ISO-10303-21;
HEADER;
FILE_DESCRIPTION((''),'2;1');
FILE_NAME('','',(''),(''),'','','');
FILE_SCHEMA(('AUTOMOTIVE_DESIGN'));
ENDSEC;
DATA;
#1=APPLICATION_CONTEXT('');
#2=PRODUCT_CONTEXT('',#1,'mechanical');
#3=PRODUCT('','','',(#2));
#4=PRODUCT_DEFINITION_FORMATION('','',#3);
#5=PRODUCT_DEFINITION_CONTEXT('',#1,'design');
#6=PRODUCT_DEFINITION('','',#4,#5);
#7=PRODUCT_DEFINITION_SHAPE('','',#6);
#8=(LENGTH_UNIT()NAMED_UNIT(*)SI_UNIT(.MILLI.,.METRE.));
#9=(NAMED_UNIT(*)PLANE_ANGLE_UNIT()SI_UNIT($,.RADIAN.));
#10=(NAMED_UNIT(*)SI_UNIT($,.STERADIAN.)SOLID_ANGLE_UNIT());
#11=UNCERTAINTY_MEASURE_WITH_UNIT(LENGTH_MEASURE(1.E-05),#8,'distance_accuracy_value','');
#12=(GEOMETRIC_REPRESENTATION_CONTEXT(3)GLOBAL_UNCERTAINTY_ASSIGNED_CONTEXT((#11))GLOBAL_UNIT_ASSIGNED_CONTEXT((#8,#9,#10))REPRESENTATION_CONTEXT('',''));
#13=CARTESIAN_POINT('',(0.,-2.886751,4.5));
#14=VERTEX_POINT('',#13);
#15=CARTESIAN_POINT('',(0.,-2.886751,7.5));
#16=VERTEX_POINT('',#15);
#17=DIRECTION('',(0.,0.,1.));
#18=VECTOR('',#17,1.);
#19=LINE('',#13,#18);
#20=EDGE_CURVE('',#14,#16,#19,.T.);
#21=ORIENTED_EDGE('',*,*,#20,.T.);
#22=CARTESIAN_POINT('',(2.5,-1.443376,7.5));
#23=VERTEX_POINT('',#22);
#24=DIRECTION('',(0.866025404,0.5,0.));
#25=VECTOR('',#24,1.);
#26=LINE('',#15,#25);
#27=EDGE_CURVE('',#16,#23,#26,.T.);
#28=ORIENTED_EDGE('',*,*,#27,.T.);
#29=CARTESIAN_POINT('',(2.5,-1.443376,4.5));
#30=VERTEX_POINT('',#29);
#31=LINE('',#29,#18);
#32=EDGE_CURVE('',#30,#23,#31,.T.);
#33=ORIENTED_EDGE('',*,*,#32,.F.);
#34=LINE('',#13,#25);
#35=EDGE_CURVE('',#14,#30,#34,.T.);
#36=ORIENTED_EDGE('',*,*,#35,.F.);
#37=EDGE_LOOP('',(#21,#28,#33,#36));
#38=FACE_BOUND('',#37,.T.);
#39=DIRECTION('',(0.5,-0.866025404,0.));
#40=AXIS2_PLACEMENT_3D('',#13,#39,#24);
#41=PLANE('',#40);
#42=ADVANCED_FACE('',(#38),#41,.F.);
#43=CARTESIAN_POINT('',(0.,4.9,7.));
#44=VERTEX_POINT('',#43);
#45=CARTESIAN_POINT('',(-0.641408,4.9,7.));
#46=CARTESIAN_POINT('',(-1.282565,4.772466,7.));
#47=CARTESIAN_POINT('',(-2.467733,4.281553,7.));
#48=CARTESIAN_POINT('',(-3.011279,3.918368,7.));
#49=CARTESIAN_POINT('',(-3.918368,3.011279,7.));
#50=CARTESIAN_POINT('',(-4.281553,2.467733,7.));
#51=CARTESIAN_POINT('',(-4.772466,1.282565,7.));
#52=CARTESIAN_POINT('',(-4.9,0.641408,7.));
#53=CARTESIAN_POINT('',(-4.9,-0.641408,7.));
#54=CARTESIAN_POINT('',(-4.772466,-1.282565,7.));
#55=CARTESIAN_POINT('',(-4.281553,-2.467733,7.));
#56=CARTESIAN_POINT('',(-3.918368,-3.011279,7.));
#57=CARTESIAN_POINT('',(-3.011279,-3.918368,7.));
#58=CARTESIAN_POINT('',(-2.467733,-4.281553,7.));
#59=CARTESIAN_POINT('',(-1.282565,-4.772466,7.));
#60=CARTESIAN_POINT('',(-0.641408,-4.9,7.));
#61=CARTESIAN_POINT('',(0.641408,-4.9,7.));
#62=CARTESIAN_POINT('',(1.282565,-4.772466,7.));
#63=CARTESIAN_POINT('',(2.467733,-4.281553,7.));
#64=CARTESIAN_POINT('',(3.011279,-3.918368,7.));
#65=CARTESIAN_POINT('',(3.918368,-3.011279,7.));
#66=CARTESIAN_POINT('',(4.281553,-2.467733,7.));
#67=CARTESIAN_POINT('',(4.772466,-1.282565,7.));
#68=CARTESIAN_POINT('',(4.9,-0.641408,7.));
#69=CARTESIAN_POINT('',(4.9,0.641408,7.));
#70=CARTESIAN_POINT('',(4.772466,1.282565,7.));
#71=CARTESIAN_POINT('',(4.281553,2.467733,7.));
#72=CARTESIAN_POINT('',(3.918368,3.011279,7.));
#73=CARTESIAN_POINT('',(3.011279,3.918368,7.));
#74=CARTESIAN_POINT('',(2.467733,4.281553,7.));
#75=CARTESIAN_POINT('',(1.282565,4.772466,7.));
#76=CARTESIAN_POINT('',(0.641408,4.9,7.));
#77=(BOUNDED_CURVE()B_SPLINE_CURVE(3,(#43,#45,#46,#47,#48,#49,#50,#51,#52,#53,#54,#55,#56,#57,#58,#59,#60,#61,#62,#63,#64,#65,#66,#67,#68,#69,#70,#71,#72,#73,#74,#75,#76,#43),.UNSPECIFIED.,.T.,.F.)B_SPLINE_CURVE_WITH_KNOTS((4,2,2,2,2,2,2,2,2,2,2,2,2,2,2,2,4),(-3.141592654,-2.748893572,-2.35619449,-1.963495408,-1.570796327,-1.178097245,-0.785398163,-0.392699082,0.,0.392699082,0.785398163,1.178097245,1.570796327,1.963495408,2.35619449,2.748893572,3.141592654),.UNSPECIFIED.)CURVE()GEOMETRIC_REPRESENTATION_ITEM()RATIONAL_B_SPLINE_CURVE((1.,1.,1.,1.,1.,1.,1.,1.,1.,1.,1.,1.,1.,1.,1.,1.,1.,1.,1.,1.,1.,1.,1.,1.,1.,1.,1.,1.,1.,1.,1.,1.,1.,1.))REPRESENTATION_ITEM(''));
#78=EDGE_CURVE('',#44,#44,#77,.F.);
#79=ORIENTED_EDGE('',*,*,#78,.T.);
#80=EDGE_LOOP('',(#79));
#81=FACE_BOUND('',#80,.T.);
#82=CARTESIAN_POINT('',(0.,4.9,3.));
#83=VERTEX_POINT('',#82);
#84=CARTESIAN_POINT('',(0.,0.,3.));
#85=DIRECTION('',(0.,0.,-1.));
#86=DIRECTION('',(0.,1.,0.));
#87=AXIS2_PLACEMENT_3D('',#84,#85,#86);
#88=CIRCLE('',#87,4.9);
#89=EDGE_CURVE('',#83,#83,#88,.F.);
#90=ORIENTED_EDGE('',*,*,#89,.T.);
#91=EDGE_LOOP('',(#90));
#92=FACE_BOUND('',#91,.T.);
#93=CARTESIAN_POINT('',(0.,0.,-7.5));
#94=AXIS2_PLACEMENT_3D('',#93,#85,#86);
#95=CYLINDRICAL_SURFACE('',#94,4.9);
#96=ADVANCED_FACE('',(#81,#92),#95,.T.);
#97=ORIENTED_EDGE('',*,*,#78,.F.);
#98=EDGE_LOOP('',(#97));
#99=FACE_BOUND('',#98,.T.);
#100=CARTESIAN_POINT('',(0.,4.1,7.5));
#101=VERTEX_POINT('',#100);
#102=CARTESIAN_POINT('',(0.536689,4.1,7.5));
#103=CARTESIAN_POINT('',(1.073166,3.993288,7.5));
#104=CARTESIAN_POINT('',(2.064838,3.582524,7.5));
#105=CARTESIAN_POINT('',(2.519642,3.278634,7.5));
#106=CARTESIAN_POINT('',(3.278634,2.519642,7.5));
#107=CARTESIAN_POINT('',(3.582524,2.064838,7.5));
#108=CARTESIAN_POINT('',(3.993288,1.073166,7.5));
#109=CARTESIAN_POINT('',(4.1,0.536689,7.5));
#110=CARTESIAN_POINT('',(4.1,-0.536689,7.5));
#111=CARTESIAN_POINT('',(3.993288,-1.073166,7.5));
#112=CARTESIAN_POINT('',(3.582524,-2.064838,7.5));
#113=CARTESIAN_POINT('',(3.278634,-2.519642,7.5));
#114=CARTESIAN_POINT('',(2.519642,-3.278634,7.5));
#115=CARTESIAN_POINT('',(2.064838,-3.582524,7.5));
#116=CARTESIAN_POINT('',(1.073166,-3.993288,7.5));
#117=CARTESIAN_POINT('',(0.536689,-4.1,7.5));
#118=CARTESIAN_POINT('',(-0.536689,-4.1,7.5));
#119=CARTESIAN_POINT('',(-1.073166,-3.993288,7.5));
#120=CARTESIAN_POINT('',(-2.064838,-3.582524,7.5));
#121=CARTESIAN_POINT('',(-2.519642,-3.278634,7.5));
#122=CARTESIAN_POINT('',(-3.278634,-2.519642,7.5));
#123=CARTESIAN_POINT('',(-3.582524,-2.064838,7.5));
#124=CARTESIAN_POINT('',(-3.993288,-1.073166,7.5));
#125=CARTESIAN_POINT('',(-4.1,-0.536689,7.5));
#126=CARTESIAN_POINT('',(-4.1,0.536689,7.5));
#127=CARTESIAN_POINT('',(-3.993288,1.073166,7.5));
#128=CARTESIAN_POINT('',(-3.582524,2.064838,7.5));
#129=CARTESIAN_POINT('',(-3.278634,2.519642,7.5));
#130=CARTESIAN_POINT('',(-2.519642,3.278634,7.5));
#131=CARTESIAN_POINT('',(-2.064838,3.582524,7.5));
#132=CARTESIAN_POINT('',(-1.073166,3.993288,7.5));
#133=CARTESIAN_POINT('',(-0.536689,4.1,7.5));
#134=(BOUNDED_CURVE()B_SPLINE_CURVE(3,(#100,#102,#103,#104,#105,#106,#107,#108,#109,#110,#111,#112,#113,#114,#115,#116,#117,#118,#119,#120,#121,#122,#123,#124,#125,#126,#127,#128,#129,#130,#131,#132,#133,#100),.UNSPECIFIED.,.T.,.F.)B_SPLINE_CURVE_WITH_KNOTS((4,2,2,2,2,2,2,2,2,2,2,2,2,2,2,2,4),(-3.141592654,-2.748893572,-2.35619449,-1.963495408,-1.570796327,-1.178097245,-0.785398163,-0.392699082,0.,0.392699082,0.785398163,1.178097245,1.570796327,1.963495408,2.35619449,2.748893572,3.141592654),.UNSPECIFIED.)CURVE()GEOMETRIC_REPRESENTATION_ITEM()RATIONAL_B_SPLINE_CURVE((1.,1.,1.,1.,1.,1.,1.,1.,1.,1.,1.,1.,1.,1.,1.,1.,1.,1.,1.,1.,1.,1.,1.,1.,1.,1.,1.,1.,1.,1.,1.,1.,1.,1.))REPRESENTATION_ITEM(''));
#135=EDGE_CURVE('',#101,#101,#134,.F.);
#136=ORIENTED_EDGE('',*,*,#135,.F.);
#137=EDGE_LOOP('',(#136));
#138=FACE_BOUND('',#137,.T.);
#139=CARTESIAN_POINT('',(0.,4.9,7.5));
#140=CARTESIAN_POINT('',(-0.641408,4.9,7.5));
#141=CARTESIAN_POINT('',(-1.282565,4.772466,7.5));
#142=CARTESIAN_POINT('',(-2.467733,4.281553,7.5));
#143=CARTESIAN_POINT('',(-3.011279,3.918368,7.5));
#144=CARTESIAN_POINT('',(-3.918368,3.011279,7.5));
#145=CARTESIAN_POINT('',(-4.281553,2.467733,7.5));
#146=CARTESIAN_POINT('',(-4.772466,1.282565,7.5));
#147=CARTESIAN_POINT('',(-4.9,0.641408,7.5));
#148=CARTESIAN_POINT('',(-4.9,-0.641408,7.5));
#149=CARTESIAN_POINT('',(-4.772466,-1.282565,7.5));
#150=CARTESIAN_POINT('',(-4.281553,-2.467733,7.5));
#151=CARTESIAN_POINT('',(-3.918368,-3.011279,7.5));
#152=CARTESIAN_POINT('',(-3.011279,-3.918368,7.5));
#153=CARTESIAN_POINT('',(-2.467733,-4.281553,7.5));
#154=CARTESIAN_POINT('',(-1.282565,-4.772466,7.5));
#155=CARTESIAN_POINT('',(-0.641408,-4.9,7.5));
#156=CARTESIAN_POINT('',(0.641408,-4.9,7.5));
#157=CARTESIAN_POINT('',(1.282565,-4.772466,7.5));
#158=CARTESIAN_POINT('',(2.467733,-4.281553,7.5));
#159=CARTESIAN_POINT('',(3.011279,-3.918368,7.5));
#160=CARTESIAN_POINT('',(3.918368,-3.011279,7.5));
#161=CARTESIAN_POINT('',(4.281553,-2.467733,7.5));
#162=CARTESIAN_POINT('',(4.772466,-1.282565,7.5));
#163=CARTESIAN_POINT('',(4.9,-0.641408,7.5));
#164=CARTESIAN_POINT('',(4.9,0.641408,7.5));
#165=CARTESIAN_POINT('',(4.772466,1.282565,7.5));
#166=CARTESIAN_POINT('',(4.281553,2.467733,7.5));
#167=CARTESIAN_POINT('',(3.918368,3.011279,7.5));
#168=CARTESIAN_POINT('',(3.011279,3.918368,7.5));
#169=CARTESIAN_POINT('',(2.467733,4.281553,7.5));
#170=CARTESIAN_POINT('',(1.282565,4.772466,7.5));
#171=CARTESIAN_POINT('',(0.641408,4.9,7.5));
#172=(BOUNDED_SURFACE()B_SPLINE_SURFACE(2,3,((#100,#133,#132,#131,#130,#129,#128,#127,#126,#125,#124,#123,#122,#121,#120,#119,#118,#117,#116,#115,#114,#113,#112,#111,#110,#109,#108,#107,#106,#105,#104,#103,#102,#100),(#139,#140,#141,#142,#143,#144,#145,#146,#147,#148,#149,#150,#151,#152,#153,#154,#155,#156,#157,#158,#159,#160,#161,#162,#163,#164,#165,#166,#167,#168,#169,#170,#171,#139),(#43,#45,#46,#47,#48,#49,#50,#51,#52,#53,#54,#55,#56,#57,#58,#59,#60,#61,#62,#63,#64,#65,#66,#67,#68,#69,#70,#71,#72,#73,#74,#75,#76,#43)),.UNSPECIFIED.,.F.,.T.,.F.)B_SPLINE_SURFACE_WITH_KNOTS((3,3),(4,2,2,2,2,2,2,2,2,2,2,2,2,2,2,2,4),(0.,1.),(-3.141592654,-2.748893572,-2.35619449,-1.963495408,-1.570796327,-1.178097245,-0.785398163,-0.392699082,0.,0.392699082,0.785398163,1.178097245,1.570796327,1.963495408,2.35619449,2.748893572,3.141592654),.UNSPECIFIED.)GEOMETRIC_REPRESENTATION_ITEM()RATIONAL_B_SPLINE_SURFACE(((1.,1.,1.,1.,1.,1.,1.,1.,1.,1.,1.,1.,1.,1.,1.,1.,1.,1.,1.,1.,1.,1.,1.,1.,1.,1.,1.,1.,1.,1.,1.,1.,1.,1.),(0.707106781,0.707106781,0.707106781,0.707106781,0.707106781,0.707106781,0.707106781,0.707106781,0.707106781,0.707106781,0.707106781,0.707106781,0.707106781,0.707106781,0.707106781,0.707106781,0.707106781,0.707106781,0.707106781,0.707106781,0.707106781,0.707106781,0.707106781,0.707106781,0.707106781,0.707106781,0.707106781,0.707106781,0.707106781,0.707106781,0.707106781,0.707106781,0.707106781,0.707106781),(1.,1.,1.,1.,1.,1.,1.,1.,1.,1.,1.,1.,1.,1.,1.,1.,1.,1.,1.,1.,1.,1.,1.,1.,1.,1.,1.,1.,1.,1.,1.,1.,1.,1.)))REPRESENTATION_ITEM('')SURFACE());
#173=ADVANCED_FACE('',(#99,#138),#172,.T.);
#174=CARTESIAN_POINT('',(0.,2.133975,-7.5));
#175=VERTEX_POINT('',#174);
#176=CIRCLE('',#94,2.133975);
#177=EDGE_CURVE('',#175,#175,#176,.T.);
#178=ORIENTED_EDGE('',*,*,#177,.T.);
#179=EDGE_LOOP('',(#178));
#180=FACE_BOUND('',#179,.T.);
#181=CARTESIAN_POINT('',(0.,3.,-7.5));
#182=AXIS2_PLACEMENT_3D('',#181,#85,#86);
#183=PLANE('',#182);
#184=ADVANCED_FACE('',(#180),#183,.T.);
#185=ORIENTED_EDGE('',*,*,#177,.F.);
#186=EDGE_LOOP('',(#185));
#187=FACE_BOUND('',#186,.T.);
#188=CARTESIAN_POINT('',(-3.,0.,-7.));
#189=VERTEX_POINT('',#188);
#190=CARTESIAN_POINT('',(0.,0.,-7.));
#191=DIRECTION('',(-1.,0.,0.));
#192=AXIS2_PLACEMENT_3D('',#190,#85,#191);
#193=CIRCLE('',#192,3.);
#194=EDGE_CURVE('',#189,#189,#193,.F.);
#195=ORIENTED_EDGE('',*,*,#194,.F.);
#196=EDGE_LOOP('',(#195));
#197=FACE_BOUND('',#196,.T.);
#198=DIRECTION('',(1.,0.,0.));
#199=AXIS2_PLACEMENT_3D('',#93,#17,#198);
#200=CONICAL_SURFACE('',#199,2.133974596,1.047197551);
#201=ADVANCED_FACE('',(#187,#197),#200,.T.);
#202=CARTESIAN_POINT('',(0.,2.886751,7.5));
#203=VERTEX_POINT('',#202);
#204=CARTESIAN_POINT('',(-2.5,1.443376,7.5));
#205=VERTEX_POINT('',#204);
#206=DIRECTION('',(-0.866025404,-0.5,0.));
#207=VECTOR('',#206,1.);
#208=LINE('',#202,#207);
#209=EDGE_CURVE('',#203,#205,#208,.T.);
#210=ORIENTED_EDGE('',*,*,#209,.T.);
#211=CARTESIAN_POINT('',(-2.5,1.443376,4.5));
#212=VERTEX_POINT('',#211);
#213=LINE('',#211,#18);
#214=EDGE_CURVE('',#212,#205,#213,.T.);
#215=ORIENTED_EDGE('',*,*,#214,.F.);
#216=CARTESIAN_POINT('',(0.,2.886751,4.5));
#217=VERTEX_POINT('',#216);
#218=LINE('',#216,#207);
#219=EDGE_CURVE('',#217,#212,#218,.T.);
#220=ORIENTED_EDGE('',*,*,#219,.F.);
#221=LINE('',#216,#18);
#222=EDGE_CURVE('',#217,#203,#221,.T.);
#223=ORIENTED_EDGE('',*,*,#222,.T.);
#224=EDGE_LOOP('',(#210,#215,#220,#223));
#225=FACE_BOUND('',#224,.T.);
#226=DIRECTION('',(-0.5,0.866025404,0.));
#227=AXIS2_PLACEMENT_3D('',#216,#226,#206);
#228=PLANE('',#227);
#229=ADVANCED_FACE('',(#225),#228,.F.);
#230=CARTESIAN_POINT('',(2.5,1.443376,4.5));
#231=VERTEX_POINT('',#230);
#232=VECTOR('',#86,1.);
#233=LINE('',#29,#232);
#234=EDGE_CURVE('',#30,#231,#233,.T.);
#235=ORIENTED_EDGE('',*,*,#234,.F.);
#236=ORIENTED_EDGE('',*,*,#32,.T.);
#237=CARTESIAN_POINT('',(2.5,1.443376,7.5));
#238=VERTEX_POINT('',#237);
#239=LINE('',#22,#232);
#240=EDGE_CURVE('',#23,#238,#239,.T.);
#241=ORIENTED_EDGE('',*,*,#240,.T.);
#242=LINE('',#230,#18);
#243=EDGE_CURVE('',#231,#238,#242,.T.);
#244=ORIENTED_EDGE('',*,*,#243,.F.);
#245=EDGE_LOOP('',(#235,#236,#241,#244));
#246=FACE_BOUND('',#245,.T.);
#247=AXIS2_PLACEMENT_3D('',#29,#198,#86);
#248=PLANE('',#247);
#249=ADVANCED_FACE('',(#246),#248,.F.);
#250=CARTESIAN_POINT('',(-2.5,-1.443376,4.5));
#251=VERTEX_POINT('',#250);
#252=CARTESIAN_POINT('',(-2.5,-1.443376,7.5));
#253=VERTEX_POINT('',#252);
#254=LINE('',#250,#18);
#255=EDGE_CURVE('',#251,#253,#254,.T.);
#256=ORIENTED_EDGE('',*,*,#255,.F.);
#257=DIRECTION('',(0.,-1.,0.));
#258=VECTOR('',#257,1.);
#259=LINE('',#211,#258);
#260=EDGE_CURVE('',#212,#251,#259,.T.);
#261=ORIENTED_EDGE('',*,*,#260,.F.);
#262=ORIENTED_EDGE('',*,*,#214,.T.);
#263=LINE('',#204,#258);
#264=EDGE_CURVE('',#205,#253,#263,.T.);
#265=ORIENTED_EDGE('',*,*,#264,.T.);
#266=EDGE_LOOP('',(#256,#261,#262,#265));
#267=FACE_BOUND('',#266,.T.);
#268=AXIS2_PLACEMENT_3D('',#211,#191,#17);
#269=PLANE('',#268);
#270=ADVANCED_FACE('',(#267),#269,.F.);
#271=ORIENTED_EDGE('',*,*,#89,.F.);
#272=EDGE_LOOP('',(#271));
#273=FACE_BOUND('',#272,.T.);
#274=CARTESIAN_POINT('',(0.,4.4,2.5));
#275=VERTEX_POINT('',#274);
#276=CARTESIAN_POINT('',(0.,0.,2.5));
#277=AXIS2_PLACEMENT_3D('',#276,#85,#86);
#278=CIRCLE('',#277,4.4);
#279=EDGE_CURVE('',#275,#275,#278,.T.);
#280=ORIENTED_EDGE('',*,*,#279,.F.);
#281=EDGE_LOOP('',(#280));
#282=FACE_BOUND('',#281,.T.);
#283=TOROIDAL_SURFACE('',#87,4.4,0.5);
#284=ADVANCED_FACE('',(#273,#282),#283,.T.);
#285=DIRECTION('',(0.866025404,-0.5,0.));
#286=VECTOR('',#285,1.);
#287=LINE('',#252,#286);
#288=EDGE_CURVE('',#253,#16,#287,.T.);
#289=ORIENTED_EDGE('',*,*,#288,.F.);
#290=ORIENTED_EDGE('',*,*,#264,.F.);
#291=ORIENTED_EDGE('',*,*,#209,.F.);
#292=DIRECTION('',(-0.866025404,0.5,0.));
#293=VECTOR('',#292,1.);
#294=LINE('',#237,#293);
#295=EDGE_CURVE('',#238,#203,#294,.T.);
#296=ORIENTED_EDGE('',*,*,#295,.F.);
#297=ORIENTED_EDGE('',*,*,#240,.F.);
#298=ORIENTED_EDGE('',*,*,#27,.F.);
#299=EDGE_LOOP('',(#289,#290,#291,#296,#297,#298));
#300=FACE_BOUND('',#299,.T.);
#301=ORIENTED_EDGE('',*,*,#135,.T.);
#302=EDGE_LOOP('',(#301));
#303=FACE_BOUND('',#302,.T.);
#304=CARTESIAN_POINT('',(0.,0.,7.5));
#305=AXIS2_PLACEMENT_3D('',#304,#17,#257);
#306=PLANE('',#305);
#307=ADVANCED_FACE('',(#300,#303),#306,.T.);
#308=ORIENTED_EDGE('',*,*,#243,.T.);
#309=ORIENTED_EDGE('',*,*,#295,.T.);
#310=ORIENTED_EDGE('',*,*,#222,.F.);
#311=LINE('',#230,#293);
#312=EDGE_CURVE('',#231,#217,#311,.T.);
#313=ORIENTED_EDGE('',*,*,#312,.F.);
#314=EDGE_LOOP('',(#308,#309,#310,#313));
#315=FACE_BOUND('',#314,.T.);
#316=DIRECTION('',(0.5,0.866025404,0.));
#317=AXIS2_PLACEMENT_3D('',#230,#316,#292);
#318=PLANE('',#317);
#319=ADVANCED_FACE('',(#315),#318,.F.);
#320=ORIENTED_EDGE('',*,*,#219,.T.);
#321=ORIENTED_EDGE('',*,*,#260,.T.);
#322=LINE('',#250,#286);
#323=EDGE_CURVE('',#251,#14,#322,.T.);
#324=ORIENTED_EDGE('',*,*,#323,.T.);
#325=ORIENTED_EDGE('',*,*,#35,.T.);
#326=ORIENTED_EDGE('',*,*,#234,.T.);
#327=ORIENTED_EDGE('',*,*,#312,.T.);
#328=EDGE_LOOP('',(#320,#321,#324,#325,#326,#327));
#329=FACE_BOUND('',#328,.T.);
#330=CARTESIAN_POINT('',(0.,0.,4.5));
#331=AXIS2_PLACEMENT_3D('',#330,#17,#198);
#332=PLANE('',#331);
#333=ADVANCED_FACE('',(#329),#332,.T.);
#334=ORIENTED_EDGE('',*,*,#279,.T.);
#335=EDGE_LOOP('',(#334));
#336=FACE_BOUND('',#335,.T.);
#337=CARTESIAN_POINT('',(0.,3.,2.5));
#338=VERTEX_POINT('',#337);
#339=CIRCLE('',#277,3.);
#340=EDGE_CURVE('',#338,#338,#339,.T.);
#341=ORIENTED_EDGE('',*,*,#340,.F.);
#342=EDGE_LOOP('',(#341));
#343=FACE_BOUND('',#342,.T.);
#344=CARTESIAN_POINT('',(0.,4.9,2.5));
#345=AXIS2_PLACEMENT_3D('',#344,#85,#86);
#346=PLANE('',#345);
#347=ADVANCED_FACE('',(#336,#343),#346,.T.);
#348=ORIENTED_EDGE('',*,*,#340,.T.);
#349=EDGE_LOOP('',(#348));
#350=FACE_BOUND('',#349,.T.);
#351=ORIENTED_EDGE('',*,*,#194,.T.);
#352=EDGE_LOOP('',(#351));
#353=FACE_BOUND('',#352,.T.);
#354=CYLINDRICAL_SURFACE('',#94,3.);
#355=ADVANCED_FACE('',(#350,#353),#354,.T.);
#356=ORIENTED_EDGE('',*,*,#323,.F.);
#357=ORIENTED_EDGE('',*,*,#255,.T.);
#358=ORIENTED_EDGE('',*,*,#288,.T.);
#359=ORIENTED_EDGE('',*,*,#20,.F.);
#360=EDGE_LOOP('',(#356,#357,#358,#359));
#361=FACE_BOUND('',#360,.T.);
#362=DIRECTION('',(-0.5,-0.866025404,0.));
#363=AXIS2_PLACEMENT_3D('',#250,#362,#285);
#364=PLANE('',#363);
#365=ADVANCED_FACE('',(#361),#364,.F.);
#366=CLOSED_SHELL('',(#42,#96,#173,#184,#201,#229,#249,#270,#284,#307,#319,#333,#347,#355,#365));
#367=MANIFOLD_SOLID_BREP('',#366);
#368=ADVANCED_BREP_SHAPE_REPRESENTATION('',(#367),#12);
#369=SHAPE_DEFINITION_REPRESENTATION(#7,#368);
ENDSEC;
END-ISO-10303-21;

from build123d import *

# Parameters (mm, degrees)
FILLET_1_R          = 0.5
FILLET_2_SIZE       = 0.5
FILLET_2_SIZE_2     = 0.8
CHAMFER_1_SIZE      = 0.5
CHAMFER_1_SIZE2     = 0.866025404
CUT_EXTRUDE_1_DEPTH = 3


with BuildPart() as part:
    # 草图2 → 旋转1 (revolve)
    with BuildSketch(Plane(origin=(0, 0, 0), x_dir=(0, 0, -1), z_dir=(1, 0, 0))):
        Polygon((-7.5, 0), (-7.5, 4.9), (-2.5, 4.9), (-2.5, 3), (7.5, 3), (7.5, 0), align=None)
    revolve(axis=Axis((0, 0, -7.5), (0, 0, 1)))

    # 圆角1
    fillet_1_edges = [part.edges().sort_by_distance(p)[0] for p in [
        (0, -4.9, 2.5),
    ]]
    fillet(fillet_1_edges, radius=FILLET_1_R)

    # 圆角2
    # an asymmetric fillet: 0.8, 0.5 mm, written as the material it takes off along each edge
    with BuildSketch(Plane(origin=(0, 0, 7.5), x_dir=(0, 1, 0), z_dir=(1, 0, 0))) as fillet_2_piece_1:
        with BuildLine():
            Bezier((4.9, -FILLET_2_SIZE), (4.9, 0), (4.9 - FILLET_2_SIZE_2, 0), weights=[1, 0.707106781, 1])
            Line((4.9 - FILLET_2_SIZE_2, 0), (4.9, 0))
            Line((4.9, 0), (4.9, -FILLET_2_SIZE))
        make_face()
    revolve(axis=Axis((0, 0, 7.5), (0, 0, 1)), mode=Mode.SUBTRACT)

    # 倒角1
    chamfer_1_edges = [part.edges().sort_by_distance(p)[0] for p in [
        (0, -3, -7.5),
    ]]
    chamfer_1_side = [part.faces().sort_by_distance(p)[0] for p in [
        (0, -3, -2.5),
    ]]
    chamfer(chamfer_1_edges, length=CHAMFER_1_SIZE, length2=CHAMFER_1_SIZE2, reference=chamfer_1_side[0])

    # 草图3 → 切除-拉伸1 (cut)
    with BuildSketch(Plane.XY.offset(7.5)):
        Polygon((0, 2.886751346), (-2.5, 1.443375673), (-2.5, -1.443375673), (0, -2.886751346), (2.5, -1.443375673), (2.5, 1.443375673), align=None)
    extrude(amount=-CUT_EXTRUDE_1_DEPTH, mode=Mode.SUBTRACT)


solid = part.part
